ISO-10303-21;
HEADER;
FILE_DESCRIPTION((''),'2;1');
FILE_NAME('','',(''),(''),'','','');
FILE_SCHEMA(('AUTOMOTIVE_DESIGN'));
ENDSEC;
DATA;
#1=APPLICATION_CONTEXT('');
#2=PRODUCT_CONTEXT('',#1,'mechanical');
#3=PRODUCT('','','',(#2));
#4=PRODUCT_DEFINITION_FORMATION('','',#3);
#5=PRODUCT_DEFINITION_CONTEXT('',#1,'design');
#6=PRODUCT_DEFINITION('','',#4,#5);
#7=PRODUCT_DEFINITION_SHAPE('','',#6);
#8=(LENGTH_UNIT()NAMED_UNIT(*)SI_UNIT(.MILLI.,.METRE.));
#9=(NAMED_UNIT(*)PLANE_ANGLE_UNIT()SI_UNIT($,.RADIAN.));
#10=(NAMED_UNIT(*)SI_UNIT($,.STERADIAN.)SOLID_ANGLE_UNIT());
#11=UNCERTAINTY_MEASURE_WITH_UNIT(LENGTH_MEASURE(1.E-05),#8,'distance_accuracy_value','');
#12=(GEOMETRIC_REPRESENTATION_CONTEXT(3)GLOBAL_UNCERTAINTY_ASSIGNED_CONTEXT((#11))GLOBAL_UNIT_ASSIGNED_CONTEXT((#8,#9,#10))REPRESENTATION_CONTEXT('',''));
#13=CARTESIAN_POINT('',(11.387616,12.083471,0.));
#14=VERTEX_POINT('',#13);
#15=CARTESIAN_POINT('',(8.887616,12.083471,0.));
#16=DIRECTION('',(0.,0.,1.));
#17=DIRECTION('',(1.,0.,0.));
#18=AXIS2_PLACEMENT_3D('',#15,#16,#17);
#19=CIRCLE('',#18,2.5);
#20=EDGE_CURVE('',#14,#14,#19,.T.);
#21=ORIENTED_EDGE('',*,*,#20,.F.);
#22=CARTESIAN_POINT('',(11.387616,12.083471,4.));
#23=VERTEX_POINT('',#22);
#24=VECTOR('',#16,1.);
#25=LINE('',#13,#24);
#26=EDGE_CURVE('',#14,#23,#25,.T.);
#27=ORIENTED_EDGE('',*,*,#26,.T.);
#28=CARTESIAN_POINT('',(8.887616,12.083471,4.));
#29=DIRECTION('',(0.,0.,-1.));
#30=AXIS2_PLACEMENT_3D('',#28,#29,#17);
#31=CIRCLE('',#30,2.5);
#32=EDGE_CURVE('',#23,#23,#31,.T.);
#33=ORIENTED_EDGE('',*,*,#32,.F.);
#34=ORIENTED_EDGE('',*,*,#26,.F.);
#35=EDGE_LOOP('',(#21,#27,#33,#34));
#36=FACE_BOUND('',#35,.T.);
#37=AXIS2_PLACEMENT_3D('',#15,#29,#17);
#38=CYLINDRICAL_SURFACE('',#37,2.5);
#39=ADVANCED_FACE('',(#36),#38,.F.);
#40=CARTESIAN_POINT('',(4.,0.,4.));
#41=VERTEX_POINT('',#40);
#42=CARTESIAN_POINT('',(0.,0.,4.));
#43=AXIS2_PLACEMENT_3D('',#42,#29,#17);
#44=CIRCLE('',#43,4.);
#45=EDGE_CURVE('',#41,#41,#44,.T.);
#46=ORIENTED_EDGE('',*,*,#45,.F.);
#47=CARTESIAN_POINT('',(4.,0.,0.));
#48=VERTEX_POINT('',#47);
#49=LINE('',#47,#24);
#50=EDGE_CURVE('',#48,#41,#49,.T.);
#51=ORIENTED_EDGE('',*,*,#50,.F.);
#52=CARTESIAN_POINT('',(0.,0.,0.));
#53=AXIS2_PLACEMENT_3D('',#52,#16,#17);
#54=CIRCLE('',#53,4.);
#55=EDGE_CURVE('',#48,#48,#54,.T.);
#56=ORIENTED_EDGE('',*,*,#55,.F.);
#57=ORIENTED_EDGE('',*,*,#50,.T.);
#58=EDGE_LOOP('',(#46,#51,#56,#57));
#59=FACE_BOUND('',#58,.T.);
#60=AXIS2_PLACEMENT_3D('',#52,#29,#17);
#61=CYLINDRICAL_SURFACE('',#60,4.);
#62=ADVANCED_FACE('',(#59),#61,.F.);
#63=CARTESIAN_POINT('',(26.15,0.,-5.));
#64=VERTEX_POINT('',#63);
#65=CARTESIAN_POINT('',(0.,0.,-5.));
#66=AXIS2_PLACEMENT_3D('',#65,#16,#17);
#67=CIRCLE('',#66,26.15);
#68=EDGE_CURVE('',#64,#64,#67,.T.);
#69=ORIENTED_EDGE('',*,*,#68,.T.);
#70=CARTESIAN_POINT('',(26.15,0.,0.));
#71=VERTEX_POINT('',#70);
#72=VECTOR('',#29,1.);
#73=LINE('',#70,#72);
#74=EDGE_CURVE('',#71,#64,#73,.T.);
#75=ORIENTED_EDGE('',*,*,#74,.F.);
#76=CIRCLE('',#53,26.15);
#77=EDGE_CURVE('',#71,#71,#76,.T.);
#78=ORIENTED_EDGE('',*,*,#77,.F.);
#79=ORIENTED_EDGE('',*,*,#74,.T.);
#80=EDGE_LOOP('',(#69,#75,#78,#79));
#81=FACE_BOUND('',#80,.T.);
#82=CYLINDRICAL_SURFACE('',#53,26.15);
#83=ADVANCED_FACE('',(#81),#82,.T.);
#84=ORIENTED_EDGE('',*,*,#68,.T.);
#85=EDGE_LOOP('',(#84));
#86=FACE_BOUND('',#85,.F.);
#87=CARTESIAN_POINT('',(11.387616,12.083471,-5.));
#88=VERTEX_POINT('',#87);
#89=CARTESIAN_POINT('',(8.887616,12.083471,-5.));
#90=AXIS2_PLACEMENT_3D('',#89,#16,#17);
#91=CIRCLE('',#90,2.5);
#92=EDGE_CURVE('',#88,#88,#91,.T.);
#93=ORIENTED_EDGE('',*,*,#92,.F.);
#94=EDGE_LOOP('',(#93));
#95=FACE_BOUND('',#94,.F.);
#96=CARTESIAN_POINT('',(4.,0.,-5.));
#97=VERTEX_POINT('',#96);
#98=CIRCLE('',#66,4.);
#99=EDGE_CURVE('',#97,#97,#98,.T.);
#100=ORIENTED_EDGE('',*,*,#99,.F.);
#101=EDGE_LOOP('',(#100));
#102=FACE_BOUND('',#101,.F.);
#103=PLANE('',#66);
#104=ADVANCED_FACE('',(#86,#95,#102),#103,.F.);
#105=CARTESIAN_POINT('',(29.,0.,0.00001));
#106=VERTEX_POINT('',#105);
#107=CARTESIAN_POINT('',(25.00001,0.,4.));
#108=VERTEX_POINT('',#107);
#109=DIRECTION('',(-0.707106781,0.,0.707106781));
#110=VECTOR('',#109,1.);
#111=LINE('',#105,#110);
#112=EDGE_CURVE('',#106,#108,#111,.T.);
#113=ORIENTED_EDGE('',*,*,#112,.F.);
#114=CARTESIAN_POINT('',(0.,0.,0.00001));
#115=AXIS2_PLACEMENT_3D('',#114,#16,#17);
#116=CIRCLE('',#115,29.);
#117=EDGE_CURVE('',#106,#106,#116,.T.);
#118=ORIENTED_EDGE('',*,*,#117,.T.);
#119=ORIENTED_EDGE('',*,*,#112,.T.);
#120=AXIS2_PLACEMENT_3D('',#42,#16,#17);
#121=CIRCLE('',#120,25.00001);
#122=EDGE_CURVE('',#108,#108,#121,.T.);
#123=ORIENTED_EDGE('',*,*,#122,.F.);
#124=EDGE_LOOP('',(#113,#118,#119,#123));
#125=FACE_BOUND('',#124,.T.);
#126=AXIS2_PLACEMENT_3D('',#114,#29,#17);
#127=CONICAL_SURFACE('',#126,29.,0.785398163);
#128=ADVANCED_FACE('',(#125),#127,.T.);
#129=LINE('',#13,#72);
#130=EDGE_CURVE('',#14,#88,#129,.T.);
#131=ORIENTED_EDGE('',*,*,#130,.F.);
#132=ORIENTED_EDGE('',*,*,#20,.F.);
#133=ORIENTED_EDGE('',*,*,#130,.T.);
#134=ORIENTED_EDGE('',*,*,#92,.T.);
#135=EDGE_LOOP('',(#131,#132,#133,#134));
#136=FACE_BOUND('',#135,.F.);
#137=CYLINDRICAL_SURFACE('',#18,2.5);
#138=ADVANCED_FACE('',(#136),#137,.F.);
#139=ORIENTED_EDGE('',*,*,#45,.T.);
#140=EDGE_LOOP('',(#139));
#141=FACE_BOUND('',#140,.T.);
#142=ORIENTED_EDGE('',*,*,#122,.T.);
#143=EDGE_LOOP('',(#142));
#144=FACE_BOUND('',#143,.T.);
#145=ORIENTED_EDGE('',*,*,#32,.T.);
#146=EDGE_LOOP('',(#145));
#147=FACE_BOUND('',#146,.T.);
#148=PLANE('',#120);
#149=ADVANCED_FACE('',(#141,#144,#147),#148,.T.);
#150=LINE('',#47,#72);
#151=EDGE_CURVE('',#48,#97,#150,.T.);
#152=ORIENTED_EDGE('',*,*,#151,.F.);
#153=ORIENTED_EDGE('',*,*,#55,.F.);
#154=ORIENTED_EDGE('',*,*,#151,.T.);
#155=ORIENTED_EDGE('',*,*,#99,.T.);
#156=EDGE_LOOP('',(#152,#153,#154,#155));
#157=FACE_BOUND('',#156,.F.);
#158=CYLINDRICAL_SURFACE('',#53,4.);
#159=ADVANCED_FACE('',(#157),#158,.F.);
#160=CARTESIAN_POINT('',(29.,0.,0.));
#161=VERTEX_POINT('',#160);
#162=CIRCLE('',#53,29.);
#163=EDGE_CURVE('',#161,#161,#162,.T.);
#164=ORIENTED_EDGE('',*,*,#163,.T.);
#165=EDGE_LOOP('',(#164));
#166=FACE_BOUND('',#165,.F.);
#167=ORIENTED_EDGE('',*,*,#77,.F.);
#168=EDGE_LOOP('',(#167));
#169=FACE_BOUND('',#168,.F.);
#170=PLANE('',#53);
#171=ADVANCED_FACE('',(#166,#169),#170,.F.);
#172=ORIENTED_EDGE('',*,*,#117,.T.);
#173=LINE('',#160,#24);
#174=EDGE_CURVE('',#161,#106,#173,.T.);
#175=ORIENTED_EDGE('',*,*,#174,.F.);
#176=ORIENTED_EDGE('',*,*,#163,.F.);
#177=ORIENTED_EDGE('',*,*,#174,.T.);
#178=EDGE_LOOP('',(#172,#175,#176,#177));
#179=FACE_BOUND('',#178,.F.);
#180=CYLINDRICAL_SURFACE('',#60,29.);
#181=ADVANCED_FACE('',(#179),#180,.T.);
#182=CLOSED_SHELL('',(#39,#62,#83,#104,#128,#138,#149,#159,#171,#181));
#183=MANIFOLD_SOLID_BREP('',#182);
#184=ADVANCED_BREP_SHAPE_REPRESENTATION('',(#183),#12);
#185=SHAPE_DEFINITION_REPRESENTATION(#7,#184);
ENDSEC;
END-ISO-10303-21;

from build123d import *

# Parameters (mm, degrees)
F0_R          = 29
F1_DEPTH      = 4
F2_R          = 26.15
F3_DEPTH      = 5
F4_SIZE       = 3.99999
F5_R          = 4
F6_DEPTH      = 25
F6_DEPTH_BACK = 25
F7_R          = 2.5
F8_DEPTH      = 25
F8_DEPTH_BACK = 25


# Not quite as in the source:
# - a fillet or chamfer is up to 0.001 mm smaller than in the source, because OpenCascade refuses the exact size


with BuildPart() as f1:
    # F0 (on Top) → F1 (new body)
    with BuildSketch(Plane.XY):
        Circle(F0_R)
    extrude(amount=F1_DEPTH)

    # F2 (on Top) → F3 (join)
    with BuildSketch(Plane.XY):
        Circle(F2_R)
    extrude(amount=-F3_DEPTH)

    # F4 (size 4 in the source; OpenCascade refuses exactly that, so slightly less here)
    f4_edges = [f1.edges().sort_by_distance(p)[0] for p in [
        (-29, 0, 4),
    ]]
    chamfer(f4_edges, length=F4_SIZE)

    # F5 (on Top) → F6 (cut, two sides)
    with BuildSketch(Plane.XY) as f6_sk:
        Circle(F5_R)
    extrude(amount=F6_DEPTH, mode=Mode.SUBTRACT)
    extrude(f6_sk.sketch, amount=-F6_DEPTH_BACK, mode=Mode.SUBTRACT)

    # F7 (on Top) → F8 (cut, two sides)
    with BuildSketch(Plane.XY) as f8_sk:
        with Locations((8.8876162109, 12.0834712764)):
            Circle(F7_R)
    extrude(amount=F8_DEPTH, mode=Mode.SUBTRACT)
    extrude(f8_sk.sketch, amount=-F8_DEPTH_BACK, mode=Mode.SUBTRACT)


solid = f1.part
